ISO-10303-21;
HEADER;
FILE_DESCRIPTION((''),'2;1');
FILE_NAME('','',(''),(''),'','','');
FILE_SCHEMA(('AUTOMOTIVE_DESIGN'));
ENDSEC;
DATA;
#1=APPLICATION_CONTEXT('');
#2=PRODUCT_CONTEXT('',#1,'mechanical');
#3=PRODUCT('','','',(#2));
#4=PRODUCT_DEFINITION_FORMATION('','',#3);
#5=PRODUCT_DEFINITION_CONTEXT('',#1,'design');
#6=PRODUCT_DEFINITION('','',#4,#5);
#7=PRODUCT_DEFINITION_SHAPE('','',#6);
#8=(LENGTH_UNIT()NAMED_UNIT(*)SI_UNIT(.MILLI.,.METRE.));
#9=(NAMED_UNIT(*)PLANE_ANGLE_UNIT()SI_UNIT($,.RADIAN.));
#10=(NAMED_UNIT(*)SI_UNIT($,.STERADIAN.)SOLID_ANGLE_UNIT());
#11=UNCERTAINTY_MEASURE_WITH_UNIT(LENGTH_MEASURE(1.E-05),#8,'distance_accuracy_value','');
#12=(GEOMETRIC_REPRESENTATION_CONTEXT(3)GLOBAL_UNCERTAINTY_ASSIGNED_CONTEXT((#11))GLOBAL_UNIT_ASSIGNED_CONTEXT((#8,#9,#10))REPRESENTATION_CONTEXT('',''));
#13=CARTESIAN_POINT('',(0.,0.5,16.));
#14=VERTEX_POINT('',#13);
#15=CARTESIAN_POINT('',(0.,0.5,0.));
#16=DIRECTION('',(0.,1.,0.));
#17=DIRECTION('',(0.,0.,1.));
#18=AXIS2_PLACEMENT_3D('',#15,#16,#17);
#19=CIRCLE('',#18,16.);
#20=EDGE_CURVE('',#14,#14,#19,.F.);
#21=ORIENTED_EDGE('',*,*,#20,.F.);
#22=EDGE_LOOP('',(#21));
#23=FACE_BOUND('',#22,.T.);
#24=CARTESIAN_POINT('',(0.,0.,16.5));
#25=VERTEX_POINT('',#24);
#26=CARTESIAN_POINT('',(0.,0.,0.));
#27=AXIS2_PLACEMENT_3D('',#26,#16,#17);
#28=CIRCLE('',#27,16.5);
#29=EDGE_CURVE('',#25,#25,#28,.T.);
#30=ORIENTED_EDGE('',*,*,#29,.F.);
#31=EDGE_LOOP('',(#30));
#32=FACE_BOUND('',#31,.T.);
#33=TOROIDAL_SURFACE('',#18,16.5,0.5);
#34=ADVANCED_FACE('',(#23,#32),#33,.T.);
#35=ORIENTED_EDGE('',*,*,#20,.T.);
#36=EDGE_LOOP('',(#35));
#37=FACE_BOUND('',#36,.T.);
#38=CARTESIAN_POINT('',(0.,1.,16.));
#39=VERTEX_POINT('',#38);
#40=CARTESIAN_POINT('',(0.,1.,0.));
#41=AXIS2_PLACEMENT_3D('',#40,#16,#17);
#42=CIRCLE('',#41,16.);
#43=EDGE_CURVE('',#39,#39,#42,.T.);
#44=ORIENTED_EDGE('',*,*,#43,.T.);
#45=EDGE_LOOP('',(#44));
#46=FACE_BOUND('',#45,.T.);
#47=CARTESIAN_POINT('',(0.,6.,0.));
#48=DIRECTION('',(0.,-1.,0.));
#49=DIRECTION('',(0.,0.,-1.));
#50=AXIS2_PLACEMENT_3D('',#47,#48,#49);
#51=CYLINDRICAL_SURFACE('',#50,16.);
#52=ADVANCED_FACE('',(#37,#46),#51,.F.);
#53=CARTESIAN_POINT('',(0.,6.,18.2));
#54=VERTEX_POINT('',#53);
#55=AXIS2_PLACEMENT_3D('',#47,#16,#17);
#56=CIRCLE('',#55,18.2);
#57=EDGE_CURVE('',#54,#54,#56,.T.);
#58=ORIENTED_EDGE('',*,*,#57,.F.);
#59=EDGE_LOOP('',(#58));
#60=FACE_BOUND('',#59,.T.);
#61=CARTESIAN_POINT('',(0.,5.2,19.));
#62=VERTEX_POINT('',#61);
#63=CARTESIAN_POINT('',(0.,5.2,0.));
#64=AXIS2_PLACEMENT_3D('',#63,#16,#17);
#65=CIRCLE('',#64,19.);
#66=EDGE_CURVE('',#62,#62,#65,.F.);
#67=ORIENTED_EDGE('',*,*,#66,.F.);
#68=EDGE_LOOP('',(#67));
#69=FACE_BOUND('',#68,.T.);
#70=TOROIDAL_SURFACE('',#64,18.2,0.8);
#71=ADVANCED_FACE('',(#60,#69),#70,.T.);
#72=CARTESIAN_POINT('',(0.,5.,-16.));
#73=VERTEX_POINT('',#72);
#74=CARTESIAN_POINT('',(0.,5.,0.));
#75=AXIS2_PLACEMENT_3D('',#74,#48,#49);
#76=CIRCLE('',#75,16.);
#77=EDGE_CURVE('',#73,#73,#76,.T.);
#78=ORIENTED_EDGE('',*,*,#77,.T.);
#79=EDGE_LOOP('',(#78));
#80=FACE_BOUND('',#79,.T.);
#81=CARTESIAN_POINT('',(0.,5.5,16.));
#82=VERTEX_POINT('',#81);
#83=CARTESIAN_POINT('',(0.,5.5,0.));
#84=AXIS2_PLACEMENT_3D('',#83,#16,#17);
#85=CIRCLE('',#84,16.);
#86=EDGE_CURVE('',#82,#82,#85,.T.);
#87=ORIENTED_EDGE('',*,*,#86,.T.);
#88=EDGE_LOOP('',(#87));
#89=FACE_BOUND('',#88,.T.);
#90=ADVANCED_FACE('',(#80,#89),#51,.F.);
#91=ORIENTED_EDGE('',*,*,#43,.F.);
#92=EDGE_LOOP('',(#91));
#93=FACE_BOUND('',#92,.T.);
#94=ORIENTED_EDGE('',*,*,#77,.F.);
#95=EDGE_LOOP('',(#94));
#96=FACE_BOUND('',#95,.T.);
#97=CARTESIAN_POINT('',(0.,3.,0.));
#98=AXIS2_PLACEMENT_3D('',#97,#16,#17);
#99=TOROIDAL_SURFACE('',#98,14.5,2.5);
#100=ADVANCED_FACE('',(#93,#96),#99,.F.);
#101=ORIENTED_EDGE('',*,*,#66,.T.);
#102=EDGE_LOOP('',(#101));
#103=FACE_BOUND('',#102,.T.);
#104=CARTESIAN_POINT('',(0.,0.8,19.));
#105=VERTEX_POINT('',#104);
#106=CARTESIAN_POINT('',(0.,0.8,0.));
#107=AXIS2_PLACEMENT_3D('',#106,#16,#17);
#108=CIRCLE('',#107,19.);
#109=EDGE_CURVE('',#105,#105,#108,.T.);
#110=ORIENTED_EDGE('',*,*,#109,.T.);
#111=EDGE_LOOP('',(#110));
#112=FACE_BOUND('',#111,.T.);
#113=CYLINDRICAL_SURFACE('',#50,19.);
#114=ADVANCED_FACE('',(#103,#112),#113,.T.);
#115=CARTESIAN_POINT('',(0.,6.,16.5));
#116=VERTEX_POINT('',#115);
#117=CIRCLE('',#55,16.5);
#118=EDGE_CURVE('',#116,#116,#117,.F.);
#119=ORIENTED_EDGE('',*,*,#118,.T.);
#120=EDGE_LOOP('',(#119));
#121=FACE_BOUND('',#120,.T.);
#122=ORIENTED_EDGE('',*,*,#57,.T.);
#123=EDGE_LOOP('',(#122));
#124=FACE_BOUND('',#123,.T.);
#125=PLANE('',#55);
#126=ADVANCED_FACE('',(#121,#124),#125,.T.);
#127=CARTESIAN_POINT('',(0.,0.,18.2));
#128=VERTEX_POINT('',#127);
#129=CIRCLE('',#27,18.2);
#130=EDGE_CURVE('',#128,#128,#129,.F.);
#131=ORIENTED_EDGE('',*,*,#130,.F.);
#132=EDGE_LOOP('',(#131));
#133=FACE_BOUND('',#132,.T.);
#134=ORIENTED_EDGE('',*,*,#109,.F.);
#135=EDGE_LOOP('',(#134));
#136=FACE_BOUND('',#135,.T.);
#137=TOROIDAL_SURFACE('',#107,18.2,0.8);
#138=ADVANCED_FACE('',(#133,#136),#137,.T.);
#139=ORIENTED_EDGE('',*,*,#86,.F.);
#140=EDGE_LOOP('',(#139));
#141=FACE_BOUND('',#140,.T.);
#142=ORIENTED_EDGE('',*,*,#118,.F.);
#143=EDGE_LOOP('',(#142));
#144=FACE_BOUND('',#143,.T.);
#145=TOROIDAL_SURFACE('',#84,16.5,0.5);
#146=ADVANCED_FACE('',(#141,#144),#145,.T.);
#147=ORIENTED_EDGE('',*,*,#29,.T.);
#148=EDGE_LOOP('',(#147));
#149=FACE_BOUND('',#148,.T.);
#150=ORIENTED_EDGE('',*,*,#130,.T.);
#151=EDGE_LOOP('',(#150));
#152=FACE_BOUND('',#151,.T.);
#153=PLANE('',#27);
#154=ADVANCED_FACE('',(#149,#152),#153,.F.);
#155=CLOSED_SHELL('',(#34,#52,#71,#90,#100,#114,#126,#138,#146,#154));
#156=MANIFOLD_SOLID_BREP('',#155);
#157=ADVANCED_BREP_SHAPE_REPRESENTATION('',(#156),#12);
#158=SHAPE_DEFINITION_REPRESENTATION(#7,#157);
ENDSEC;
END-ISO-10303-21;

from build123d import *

# Parameters (mm, degrees)
SKETCH_1_R      = 19
SKETCH_1_R_2    = 16
EXTRUDE_1_DEPTH = 6
FILLET_1_R      = 0.8
FILLET_2_R      = 0.5
FILLET_3_R      = 0.5


# Read off the part's stored shape, not the designer's step: 压凹1
with BuildPart() as part:
    # 草图1 → 凸台-拉伸1 (new body)
    with BuildSketch(Plane(origin=(0, 0, 0), x_dir=(1, 0, 0), z_dir=(0, 1, 0))):
        with Locations(Location((0, 0, 0), (0, 0, 270))):
            Circle(SKETCH_1_R)
        with Locations(Location((0, 0, 0), (0, 0, 270))):
            Circle(SKETCH_1_R_2, mode=Mode.SUBTRACT)
    extrude(amount=EXTRUDE_1_DEPTH)

    # 压凹1 outline → 压凹1 (revolve, cut)
    with BuildSketch(Plane.XY):
        with BuildLine():
            Line((16, 5), (16, 1))
            ThreePointArc((16, 1), (17, 3), (16, 5))
        make_face()
    revolve(axis=Axis((0, 0, 0), (0, 1, 0)), mode=Mode.SUBTRACT)

    # 圆角1
    fillet_1_edges = [part.edges().sort_by_distance(p)[0] for p in [
        (0, 0, -19),
        (0, 6, -19),
    ]]
    fillet(fillet_1_edges, radius=FILLET_1_R)

    # 圆角2
    fillet_2_edges = [part.edges().sort_by_distance(p)[0] for p in [
        (0, 0, -16),
    ]]
    fillet(fillet_2_edges, radius=FILLET_2_R)

    # 圆角3
    fillet_3_edges = [part.edges().sort_by_distance(p)[0] for p in [
        (0, 6, -16),
    ]]
    fillet(fillet_3_edges, radius=FILLET_3_R)


solid = part.part
